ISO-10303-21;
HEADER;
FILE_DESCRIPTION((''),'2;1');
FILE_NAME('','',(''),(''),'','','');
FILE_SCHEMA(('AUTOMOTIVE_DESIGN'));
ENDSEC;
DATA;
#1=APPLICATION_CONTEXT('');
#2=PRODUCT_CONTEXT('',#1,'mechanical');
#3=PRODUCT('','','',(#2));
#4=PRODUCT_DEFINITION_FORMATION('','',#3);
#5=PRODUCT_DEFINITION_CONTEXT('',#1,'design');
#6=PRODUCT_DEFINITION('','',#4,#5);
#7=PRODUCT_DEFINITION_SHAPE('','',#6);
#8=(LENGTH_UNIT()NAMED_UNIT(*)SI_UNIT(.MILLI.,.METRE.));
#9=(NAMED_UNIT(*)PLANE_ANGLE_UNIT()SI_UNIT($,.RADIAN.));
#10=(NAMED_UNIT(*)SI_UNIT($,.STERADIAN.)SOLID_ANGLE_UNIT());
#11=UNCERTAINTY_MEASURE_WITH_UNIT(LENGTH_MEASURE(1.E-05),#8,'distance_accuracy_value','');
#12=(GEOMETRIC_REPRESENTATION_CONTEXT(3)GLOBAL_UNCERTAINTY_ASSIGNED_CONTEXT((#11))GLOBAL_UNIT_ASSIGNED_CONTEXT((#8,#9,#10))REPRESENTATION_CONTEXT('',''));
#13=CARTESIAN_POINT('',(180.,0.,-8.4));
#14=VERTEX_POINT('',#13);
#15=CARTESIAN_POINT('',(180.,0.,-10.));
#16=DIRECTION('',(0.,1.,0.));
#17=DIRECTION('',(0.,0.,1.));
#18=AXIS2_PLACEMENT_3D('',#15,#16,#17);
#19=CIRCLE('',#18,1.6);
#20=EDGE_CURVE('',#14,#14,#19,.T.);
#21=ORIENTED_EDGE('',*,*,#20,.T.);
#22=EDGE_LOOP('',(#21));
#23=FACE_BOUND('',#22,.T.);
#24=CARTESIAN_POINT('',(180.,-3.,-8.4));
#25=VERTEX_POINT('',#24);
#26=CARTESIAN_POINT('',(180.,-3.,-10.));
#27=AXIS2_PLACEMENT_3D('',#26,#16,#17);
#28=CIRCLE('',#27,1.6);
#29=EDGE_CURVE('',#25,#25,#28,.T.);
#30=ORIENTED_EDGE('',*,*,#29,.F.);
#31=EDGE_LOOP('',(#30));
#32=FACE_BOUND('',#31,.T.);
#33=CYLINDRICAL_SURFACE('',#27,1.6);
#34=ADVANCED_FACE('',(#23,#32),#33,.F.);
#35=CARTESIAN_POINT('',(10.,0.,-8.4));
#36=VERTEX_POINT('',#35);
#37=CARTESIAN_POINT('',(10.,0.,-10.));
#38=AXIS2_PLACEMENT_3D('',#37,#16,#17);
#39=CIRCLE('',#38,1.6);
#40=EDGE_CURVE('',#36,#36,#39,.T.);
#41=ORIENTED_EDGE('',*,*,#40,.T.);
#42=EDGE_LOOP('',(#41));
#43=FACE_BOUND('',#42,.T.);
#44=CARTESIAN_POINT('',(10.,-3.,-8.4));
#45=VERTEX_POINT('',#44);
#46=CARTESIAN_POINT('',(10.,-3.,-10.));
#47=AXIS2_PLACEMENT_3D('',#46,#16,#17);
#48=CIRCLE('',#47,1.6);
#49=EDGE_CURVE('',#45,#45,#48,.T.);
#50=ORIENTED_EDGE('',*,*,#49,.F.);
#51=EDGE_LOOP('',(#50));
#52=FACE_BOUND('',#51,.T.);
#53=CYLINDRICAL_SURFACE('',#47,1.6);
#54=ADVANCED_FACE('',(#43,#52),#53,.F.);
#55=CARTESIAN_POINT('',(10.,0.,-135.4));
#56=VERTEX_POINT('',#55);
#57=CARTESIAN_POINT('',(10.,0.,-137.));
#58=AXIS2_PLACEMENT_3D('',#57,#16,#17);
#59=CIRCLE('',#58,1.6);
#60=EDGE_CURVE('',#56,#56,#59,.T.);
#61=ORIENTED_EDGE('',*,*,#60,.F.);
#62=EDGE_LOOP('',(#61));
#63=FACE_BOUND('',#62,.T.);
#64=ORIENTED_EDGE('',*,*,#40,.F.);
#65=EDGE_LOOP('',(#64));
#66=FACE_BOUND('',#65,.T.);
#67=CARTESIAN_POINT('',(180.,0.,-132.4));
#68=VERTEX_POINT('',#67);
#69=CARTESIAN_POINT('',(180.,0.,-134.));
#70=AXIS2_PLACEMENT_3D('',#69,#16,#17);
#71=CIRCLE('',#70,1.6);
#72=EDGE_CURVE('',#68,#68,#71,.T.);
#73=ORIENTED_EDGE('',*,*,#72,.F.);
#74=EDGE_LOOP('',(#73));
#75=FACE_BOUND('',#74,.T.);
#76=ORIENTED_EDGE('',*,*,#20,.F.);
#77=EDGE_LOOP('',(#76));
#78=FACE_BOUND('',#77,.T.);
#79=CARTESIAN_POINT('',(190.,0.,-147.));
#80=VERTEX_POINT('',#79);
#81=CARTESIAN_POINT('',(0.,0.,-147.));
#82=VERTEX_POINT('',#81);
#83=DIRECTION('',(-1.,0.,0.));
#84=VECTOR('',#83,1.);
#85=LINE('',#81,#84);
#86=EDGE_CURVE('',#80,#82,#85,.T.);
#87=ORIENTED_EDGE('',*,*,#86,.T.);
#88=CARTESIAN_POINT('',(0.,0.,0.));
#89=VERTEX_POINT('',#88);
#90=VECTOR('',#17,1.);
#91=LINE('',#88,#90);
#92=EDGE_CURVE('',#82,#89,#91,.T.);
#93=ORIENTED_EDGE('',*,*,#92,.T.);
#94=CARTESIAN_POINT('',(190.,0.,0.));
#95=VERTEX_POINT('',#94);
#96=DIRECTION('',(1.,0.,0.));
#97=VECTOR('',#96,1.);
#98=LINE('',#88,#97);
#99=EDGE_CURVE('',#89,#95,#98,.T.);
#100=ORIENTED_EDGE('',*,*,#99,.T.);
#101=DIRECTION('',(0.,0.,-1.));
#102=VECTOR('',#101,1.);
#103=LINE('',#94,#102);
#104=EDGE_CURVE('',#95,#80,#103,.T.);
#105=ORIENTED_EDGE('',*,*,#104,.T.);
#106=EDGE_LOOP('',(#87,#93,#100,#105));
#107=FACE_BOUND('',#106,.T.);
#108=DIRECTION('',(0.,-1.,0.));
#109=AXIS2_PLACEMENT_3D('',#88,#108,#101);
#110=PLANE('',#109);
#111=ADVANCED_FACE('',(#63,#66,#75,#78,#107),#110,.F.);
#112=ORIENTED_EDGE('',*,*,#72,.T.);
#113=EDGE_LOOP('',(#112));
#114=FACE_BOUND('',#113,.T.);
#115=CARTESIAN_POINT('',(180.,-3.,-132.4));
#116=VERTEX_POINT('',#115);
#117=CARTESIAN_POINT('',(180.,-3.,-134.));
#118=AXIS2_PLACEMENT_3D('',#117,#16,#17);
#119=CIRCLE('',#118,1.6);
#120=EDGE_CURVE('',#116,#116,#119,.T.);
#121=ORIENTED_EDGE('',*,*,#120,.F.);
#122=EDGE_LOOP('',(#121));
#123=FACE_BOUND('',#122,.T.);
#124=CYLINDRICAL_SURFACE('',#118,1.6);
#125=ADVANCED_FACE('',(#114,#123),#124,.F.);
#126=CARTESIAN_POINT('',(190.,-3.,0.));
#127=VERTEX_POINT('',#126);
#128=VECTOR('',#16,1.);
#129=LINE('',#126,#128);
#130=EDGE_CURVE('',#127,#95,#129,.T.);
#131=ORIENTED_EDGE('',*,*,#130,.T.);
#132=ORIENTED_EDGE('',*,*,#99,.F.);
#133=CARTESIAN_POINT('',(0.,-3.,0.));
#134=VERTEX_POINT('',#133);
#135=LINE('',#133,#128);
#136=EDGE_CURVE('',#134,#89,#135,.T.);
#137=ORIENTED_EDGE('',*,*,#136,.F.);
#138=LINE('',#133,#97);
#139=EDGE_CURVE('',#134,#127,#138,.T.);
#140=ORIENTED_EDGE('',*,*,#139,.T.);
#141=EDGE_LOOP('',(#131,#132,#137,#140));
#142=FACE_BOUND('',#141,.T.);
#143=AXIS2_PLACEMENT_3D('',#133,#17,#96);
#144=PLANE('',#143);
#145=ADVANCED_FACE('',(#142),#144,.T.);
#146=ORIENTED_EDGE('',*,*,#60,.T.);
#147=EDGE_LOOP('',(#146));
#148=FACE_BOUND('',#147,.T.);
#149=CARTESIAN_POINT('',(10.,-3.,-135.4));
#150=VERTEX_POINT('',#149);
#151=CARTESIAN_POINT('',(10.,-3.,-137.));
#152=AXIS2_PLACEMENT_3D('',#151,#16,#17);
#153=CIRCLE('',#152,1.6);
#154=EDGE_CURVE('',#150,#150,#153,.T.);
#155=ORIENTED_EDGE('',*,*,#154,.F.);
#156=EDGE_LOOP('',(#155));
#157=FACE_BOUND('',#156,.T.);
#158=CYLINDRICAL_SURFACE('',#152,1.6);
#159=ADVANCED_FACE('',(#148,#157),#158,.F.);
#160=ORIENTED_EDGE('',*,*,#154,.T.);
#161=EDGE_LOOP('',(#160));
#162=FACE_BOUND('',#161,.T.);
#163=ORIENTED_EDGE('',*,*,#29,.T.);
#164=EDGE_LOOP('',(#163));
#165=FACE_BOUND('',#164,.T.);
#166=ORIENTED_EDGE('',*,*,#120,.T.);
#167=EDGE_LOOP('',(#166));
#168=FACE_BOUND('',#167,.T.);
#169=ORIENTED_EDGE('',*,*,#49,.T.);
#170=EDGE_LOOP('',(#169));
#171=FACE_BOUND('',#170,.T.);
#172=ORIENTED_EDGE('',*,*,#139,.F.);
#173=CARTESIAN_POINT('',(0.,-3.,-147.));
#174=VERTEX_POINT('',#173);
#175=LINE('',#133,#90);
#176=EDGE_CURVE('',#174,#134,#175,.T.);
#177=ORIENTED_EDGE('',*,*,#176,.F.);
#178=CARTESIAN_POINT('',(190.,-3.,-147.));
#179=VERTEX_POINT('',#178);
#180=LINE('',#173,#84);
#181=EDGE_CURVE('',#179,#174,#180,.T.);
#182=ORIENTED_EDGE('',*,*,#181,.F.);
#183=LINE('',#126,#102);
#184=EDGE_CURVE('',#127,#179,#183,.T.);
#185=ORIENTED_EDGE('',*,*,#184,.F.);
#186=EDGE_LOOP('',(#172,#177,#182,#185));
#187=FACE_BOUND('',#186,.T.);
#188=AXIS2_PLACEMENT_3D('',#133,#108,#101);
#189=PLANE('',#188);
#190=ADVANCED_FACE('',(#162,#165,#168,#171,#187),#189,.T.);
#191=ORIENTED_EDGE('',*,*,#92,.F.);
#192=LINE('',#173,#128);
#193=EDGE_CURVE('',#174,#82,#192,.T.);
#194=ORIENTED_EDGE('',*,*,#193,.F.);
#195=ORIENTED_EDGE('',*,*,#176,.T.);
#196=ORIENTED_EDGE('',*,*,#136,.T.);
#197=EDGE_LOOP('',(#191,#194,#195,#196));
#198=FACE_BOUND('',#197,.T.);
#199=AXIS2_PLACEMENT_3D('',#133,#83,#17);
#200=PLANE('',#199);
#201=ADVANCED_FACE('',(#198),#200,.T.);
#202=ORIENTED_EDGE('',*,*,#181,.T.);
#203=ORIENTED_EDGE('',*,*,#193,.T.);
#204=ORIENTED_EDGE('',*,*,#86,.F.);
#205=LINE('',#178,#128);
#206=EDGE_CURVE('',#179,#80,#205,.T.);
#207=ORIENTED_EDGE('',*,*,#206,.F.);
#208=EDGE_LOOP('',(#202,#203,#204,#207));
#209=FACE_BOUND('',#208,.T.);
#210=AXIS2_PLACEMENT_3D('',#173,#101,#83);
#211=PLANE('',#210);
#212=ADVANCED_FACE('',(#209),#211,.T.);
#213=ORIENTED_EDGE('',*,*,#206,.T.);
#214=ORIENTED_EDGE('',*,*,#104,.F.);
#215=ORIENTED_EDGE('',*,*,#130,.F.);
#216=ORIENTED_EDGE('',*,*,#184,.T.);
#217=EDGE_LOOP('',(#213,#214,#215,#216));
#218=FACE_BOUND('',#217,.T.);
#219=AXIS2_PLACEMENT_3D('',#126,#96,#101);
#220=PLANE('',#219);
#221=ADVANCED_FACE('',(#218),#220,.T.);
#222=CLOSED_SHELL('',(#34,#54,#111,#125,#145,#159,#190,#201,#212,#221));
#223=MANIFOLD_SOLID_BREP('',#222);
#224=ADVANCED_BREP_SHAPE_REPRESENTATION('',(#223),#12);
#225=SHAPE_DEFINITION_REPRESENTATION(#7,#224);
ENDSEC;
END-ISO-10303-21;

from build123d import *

# Parameters (mm, degrees)
SKETCH1_W          = 190
SKETCH1_H          = 147
SKETCH1_R          = 1.6
BASE_FLANGE1_DEPTH = 3


# Sheet-metal steps are written as plain solids
with BuildPart() as part:
    # Sketch1 → Base-Flange1 (new body)
    with BuildSketch(Plane(origin=(0, 0, 0), x_dir=(1, 0, 0), z_dir=(0, 1, 0))):
        with Locations((95, 73.5)):
            Rectangle(SKETCH1_W, SKETCH1_H)
        with Locations(Location((10, 10, 0), (0, 0, 270))):
            Circle(SKETCH1_R, mode=Mode.SUBTRACT)
        with Locations(Location((180, 10, 0), (0, 0, 270))):
            Circle(SKETCH1_R, mode=Mode.SUBTRACT)
        with Locations(Location((10, 137, 0), (0, 0, 270))):
            Circle(SKETCH1_R, mode=Mode.SUBTRACT)
        with Locations(Location((180, 134, 0), (0, 0, 270))):
            Circle(SKETCH1_R, mode=Mode.SUBTRACT)
    extrude(amount=-BASE_FLANGE1_DEPTH)


solid = part.part
